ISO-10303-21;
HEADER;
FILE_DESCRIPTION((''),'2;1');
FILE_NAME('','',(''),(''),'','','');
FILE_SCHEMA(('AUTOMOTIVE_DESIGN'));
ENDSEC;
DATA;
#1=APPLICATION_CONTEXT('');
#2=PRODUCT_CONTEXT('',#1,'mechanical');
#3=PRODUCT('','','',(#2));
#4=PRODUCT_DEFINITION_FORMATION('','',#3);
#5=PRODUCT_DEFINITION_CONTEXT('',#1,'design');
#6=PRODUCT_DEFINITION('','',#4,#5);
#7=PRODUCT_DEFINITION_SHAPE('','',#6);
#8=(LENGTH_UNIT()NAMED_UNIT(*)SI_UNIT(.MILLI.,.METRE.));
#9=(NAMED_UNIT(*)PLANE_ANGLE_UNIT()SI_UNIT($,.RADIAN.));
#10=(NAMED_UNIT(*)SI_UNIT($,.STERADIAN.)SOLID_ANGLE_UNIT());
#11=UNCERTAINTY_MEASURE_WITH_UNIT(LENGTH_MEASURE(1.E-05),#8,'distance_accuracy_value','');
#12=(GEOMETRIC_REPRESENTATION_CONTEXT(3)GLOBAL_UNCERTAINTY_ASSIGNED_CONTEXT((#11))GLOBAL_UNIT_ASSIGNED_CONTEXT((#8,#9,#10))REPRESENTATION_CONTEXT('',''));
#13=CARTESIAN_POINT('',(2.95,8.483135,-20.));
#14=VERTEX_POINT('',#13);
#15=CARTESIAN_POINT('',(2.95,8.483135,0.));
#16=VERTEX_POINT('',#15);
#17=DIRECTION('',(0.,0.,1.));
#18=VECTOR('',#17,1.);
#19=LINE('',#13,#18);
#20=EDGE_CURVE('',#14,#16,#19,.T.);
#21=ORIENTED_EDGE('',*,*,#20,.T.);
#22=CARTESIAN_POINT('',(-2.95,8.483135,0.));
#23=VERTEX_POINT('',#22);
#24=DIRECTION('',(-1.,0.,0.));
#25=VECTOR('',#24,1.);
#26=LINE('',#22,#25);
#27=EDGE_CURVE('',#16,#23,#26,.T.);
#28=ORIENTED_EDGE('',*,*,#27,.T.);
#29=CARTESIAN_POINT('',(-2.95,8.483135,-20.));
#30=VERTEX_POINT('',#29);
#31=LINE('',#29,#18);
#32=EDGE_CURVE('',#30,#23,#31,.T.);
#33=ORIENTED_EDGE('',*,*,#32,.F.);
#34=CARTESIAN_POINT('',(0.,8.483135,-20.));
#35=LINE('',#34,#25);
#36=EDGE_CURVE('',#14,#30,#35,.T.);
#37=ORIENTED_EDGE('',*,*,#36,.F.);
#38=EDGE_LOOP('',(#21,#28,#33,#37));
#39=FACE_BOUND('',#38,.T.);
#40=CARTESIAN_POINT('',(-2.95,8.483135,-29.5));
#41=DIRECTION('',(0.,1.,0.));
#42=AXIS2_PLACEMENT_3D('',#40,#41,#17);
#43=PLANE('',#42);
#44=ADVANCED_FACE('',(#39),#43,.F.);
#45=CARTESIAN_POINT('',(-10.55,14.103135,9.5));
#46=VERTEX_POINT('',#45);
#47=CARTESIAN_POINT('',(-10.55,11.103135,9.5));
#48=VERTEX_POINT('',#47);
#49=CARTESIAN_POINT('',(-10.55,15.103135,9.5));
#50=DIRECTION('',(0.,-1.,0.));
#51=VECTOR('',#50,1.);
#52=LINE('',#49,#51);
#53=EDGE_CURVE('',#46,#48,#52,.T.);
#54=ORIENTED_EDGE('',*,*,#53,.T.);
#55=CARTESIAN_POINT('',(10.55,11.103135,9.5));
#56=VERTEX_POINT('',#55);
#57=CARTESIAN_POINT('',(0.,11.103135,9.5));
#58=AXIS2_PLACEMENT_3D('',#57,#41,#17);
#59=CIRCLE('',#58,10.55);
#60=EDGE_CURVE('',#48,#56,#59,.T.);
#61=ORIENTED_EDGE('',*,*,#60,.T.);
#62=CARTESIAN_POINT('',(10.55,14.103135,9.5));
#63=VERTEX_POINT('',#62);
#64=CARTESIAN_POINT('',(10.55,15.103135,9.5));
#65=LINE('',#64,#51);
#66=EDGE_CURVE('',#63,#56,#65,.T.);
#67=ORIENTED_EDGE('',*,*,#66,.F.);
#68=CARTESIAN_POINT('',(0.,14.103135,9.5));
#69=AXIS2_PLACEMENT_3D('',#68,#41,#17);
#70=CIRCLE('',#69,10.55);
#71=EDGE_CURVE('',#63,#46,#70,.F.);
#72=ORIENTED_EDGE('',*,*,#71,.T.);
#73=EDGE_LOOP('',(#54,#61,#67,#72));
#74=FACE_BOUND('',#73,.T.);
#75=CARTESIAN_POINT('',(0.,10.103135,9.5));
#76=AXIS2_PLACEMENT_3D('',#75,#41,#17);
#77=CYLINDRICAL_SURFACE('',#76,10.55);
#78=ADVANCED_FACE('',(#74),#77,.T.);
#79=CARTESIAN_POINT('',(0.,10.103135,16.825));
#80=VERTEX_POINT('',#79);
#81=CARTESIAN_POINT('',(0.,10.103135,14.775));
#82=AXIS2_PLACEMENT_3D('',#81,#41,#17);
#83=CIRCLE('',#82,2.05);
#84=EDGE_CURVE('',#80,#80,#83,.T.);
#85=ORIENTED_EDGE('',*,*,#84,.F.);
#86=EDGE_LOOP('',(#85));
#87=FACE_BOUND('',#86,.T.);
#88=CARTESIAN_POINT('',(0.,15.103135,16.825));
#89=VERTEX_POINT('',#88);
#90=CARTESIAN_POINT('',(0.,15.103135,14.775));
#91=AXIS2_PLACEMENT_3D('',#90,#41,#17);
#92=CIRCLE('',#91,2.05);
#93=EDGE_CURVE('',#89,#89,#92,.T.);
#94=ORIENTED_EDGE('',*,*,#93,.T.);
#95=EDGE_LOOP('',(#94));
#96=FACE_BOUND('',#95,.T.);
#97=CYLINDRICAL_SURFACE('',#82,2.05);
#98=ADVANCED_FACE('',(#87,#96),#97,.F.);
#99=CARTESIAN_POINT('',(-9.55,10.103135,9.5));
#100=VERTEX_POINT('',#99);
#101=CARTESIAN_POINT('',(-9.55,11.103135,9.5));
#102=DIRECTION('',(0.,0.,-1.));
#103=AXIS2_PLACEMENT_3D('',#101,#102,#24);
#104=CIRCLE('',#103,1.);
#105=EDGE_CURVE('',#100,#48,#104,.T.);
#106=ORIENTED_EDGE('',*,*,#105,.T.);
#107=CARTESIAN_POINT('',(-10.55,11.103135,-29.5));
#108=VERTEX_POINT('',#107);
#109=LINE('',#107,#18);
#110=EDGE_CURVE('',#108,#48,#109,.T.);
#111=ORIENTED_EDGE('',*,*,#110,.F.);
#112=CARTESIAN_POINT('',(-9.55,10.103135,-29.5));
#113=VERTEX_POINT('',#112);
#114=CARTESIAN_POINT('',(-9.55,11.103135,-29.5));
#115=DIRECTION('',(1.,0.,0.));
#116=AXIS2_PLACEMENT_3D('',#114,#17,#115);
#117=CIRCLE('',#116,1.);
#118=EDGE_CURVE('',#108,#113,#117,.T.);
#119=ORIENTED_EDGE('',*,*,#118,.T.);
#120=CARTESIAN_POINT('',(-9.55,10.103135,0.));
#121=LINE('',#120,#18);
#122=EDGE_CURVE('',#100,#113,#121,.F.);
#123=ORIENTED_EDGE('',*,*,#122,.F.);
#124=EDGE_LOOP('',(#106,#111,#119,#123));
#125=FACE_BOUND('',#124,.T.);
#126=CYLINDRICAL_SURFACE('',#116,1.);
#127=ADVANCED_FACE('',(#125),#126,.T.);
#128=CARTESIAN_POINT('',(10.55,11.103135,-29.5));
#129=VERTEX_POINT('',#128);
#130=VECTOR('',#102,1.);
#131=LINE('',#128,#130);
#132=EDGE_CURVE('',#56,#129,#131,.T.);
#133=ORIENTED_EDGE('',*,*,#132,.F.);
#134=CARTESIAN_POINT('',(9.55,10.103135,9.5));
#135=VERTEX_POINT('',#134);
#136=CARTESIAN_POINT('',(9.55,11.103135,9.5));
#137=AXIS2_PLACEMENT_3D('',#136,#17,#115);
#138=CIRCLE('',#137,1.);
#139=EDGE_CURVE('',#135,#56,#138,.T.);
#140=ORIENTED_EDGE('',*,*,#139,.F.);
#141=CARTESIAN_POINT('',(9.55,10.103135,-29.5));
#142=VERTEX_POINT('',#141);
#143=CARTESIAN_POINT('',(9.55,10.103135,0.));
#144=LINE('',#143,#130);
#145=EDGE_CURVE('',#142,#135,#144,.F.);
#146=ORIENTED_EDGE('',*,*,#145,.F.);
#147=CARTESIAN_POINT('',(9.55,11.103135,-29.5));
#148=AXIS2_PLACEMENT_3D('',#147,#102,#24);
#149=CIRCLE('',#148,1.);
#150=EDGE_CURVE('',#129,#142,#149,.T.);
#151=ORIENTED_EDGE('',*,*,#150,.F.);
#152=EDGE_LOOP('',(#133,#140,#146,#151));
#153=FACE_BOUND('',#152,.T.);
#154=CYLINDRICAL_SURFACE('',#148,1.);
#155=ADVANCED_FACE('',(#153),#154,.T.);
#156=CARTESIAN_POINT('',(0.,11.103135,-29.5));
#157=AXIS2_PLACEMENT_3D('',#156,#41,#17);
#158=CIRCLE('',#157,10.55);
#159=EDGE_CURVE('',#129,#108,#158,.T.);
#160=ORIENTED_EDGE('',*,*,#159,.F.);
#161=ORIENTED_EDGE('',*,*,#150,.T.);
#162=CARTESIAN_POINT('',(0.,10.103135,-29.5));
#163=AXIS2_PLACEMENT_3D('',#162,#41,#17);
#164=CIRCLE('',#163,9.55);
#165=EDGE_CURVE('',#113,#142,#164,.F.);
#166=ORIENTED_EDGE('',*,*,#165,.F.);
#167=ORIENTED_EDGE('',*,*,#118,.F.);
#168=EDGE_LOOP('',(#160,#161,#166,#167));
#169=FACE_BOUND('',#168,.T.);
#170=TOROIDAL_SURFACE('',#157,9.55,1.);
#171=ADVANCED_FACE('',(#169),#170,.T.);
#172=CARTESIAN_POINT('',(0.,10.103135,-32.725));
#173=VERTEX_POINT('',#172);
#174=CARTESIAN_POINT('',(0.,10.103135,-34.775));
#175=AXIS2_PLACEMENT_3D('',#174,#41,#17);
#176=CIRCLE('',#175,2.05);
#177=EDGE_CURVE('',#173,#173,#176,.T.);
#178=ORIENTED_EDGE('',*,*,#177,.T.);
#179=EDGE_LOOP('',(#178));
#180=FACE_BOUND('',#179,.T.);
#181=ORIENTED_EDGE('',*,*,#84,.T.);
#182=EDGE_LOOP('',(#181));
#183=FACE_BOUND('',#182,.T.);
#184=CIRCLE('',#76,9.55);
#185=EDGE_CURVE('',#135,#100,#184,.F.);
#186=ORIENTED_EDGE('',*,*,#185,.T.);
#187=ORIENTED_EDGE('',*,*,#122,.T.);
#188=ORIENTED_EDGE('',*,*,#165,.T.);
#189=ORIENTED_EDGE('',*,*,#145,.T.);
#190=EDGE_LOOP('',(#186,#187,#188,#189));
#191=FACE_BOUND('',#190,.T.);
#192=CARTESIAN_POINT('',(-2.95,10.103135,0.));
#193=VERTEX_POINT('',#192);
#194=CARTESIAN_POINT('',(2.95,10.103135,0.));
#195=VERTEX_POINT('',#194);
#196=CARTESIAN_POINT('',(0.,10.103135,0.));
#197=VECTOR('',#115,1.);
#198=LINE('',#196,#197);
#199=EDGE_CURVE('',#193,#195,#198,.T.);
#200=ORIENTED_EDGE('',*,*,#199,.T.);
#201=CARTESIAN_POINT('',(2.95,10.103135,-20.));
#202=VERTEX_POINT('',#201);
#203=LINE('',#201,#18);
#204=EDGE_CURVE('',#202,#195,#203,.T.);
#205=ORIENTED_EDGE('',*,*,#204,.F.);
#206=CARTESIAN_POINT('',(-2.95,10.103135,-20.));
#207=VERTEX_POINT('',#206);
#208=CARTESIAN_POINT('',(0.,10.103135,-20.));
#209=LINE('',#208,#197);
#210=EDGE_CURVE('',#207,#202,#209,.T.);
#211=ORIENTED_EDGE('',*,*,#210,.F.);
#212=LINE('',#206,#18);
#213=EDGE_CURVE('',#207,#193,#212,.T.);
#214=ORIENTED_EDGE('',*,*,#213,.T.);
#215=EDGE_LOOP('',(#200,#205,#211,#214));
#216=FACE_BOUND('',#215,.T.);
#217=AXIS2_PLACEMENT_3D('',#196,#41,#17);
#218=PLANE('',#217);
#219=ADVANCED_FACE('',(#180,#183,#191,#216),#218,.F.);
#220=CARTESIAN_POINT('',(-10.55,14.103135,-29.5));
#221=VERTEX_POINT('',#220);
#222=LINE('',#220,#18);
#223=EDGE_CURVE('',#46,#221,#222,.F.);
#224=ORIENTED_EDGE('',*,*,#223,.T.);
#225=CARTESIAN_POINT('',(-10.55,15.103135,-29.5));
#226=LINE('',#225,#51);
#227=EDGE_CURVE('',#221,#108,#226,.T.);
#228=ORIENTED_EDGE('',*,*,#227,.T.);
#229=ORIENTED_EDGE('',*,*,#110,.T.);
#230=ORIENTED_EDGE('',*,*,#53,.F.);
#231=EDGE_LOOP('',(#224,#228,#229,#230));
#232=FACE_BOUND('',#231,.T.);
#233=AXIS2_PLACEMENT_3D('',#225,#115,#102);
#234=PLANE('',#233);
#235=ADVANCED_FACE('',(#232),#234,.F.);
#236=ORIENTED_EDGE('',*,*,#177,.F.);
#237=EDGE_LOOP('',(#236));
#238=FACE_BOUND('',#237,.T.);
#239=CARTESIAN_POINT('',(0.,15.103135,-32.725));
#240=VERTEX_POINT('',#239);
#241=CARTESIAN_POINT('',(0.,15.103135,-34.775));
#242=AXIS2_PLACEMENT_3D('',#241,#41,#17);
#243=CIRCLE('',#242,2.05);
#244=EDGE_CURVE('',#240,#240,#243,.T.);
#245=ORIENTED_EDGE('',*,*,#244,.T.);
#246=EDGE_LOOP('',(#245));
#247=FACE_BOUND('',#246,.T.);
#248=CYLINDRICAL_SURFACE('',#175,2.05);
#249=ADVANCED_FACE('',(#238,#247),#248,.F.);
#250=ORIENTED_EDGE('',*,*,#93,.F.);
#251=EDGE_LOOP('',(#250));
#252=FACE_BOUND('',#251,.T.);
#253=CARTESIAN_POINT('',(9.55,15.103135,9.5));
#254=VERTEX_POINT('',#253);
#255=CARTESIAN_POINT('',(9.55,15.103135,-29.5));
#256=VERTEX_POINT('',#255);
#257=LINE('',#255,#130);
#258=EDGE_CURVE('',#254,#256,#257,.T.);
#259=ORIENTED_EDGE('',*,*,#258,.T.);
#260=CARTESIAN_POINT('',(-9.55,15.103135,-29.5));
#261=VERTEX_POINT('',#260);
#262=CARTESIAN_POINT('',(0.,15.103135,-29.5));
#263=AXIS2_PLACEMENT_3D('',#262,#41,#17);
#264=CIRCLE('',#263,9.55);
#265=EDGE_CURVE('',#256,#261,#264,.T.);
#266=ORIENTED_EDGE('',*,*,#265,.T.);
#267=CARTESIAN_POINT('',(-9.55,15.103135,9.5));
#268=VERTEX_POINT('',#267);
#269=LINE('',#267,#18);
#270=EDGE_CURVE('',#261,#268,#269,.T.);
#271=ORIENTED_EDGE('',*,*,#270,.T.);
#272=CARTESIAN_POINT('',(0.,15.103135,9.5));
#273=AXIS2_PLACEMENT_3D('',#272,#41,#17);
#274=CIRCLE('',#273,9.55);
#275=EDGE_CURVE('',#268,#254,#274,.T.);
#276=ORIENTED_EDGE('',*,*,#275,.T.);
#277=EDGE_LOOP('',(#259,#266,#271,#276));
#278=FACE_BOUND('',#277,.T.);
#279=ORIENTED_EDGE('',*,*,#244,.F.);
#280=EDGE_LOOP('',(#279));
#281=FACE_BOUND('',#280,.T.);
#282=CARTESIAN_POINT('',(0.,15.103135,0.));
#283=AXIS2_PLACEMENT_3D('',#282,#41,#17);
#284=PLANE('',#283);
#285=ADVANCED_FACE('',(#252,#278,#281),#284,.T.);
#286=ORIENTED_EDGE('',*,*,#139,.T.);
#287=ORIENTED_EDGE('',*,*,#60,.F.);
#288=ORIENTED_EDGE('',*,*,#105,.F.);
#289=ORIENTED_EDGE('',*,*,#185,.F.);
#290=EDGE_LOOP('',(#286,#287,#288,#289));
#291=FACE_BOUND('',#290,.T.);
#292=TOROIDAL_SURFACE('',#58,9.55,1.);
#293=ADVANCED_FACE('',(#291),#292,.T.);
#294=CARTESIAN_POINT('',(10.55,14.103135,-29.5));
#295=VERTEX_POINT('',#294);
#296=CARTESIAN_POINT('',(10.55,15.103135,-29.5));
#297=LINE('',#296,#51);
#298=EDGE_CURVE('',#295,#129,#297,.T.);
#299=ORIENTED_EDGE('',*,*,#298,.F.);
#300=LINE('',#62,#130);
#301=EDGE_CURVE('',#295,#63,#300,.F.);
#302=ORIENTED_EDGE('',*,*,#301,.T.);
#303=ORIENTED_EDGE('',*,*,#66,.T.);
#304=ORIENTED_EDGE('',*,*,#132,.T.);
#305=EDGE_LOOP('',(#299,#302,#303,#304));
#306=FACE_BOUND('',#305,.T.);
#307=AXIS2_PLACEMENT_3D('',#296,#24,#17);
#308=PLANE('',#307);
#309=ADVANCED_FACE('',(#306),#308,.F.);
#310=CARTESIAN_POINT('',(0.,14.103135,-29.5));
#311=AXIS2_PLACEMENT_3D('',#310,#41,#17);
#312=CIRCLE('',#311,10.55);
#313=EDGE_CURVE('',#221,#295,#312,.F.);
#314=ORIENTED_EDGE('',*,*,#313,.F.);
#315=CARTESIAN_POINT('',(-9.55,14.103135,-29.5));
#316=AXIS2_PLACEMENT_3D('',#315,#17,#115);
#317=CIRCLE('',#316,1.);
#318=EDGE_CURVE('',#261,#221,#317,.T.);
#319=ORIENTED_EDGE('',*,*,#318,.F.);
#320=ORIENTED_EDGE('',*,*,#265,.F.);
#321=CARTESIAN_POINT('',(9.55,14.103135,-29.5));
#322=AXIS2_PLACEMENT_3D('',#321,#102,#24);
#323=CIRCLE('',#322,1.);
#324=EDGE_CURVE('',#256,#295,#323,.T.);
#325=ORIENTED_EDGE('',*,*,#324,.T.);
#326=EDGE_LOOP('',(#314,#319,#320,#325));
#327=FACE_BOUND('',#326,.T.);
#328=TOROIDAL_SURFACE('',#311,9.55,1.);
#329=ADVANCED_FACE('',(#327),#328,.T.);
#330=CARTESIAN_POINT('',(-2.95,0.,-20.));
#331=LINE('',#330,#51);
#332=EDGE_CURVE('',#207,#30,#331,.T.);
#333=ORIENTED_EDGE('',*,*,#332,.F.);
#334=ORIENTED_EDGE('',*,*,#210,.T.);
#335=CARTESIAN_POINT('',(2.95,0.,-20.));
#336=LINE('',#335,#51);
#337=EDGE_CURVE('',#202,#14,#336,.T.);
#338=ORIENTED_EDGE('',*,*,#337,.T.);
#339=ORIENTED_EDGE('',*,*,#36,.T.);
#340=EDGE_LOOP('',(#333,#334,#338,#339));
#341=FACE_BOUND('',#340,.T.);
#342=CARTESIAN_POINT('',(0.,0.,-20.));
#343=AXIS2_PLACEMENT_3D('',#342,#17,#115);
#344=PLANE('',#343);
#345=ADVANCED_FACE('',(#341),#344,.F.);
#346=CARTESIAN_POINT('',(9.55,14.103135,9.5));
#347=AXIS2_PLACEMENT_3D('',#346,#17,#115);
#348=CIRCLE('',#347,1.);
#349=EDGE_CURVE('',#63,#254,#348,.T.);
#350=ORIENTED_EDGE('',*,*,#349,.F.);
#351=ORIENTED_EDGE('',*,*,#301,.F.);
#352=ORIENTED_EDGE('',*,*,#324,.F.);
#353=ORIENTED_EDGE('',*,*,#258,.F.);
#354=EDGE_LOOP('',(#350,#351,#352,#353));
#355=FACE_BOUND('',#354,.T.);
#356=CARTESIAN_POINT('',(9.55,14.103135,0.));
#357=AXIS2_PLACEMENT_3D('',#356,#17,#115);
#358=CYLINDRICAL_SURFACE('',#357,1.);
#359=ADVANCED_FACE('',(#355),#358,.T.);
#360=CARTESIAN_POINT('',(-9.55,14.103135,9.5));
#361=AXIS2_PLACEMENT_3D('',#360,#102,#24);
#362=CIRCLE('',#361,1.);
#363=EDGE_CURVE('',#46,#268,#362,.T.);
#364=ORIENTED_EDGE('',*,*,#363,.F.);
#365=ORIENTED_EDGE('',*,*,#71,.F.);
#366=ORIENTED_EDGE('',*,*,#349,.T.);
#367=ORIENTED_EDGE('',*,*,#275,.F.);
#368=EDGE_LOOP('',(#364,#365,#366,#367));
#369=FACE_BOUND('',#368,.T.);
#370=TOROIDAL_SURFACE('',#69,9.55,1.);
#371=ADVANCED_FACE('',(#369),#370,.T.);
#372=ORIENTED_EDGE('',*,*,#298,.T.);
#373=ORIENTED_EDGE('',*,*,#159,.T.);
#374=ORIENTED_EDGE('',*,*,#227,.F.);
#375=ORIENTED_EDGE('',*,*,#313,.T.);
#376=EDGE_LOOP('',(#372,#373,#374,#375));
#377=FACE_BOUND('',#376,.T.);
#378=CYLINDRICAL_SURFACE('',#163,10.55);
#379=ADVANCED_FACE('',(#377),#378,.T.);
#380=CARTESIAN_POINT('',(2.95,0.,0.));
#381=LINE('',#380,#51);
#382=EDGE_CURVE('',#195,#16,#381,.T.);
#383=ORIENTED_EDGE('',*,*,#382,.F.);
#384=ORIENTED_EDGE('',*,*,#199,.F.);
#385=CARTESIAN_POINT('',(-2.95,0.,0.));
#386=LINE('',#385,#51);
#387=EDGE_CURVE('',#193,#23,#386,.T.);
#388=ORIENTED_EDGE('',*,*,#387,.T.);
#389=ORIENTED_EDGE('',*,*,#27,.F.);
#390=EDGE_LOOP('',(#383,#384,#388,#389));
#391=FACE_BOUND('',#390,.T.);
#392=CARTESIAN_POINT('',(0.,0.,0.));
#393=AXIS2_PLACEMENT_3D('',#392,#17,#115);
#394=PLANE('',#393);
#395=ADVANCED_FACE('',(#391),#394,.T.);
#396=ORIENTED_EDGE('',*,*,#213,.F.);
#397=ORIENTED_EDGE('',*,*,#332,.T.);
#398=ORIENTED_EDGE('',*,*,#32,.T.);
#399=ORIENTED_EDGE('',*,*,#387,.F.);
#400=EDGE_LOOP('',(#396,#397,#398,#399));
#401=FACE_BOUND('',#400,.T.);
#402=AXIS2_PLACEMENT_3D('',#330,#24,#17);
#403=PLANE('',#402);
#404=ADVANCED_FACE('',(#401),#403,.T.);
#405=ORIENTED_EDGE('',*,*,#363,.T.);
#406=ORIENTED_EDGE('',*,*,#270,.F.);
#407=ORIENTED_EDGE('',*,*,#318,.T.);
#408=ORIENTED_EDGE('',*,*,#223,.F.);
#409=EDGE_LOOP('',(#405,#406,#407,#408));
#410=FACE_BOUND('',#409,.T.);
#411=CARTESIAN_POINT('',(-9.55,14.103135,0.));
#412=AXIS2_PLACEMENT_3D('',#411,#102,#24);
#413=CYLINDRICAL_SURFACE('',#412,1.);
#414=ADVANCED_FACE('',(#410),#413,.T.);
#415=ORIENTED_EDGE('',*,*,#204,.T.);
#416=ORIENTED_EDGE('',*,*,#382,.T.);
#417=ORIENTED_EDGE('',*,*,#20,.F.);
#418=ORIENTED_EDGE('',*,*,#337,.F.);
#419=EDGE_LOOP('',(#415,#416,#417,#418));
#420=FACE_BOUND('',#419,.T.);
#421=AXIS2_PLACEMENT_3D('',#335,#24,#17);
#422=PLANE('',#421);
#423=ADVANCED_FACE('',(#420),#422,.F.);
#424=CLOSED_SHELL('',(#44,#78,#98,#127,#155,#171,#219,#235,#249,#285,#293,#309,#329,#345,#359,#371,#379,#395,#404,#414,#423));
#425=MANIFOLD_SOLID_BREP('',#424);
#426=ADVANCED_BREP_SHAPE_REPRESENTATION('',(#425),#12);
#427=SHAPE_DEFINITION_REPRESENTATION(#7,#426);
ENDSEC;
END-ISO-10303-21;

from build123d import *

# Parameters (mm, degrees)
BOSS_EXTRU_1_DEPTH      = 20
CONG_1_R                = 0.5
CONG_2_R                = 1
BOSS_EXTRU_2_DEPTH      = 5
ENL_V_MAT_EXTRU_1_DEPTH = 35.78012648597392
ESQUISSE6_R             = 2.0500000000000007
ESQUISSE6_R_2           = 2.05
BOSS_EXTRU_3_DEPTH      = 5
CONG_4_R                = 1


with BuildPart() as part:
    # Esquisse1 → Boss.-Extru.1 (new body)
    with BuildSketch(Plane.XY):
        Polygon((-1.176e-14, 10.103135382441117), (-2.578e-14, 4.840000000000001), (3.5, 4.840000000000001), (5.71, 6.983135382441116), (5.71, 8.483135382441116), (2.95, 8.483135382441116), (2.95, 10.103135382441117), align=None)
        Polygon((-3.5, 4.840000000000001), (-2.576e-14, 4.840000000000001), (-1.176e-14, 10.103135382441117), (-2.95, 10.103135382441117), (-2.95, 8.483135382441116), (-5.71, 8.483135382441116), (-5.71, 6.983135382441116), align=None)
    extrude(amount=-BOSS_EXTRU_1_DEPTH)

    # Congé1
    cong_1_edges = [part.edges().sort_by_distance(p)[0] for p in [
        (5.71, 7.733135382441116, 0),
        (4.605, 5.911567691220558, 0),
        (0, 4.840000000000001, 0),
        (-4.605, 5.911567691220558, 0),
        (-5.71, 7.733135382441116, 0),
        (-5.71, 7.733135382441116, -20),
        (-4.605, 5.911567691220558, -20),
        (0, 4.840000000000001, -20),
        (4.605, 5.911567691220558, -20),
        (5.71, 7.733135382441116, -20),
    ]]
    fillet(cong_1_edges, radius=CONG_1_R)

    # Congé2
    # the kernel refuses this fillet: 1 mm, written as the material it takes off along each edge
    with BuildSketch(Plane(origin=(4.71, 7.4063748668930085, -20), x_dir=(1, 0, 0), z_dir=(0, 1, 0))) as cong_2_piece_1:
        with BuildLine():
            CenterArc((0.5, -0.5), 0.5, 0, 90)
            Line((1, -0.5), (1, 0))
            Line((1, 0), (0.5, 0))
        make_face()
    revolve(axis=Axis((4.71, 7.4063748668930085, -20), (0, 0, -1)), revolution_arc=45.87999999999987, mode=Mode.SUBTRACT)
    with BuildSketch(Plane(origin=(-4.710000000000001, 7.40637486689301, -20), x_dir=(-0.6961634275566162, -0.717883334625219, 0), z_dir=(0.717883334625219, -0.6961634275566162, 0))) as cong_2_piece_2:
        with BuildLine():
            CenterArc((0.5, -0.5), 0.5, 0, 90)
            Line((1, -0.5), (1, 0))
            Line((1, 0), (0.5, 0))
        make_face()
    revolve(axis=Axis((-4.710000000000001, 7.40637486689301, -20), (0, 0, -1)), revolution_arc=45.87999999999987, mode=Mode.SUBTRACT)
    with BuildSketch(Plane(origin=(4.71, 7.4063748668930085, 0), x_dir=(0.6961634275566162, -0.717883334625219, 0), z_dir=(-0.717883334625219, -0.6961634275566162, 0))) as cong_2_piece_3:
        with BuildLine():
            CenterArc((0.5, -0.5), 0.5, 0, 90)
            Line((1, -0.5), (1, 0))
            Line((1, 0), (0.5, 0))
        make_face()
    revolve(axis=Axis((4.71, 7.4063748668930085, 0), (0, 0, 1)), revolution_arc=45.87999999999987, mode=Mode.SUBTRACT)
    with BuildSketch(Plane(origin=(-4.710000000000001, 7.40637486689301, 0), x_dir=(-1, 0, 0), z_dir=(0, 1, 0))) as cong_2_piece_4:
        with BuildLine():
            CenterArc((0.5, -0.5), 0.5, 0, 90)
            Line((1, -0.5), (1, 0))
            Line((1, 0), (0.5, 0))
        make_face()
    revolve(axis=Axis((-4.710000000000001, 7.40637486689301, 0), (0, 0, 1)), revolution_arc=45.87999999999987, mode=Mode.SUBTRACT)
    with BuildSketch(Plane(origin=(-5.71, 6.983135382441116, 1.1e-16), x_dir=(0.717883334625219, -0.6961634275566161, 0), z_dir=(0, 0, -1))) as cong_2_piece_5:
        with BuildLine():
            CenterArc((CONG_2_R * 0.423239484452, -CONG_2_R), CONG_2_R, 90.00000000000003, 45.879999999999825)
            Line((-CONG_2_R * 0.294643850173, -CONG_2_R * 0.303836572443), (0, 0))
            Line((0, 0), (CONG_2_R * 0.423239484452, 0))
        make_face()
    extrude(amount=20, mode=Mode.SUBTRACT)
    with BuildSketch(Plane(origin=(5.71, 6.983135382441116, 1.1e-16), x_dir=(-0.7178833346252179, -0.6961634275566172, 0), z_dir=(0, 0, -1))) as cong_2_piece_6:
        with BuildLine():
            CenterArc((CONG_2_R * 0.423239484452, CONG_2_R), CONG_2_R, 224.12000000000015, 45.87999999999994)
            Line((-CONG_2_R * 0.294643850173, CONG_2_R * 0.303836572443), (0, 0))
            Line((0, 0), (CONG_2_R * 0.423239484452, 2e-17))
        make_face()
    extrude(amount=20, mode=Mode.SUBTRACT)

    # Esquisse3 → Boss.-Extru.2 (add)
    with BuildSketch(Plane(origin=(0, 10.103135382441117, 0), x_dir=(1, 0, 0), z_dir=(0, 1, 0))):
        Polygon((-10.550000000000004, 29.5), (10.549999999999994, 29.5), (10.55, -9.500000000000002), (-10.55, -9.500000000000002), align=None)
    extrude(amount=BOSS_EXTRU_2_DEPTH)

    # Esquisse5 → Enlèv. mat.-Extru.1 (cut, through all)
    with BuildSketch(Plane.XY):
        with BuildLine():
            Line((-5.209999999999999, 8.483135382441116), (-5.71, 8.483135382441116))
            Line((-5.71, 8.483135382441116), (-5.71, 7.4063748668930085))
            ThreePointArc((-5.71, 7.4063748668930085), (-5.630913521335368, 7.01660790289825), (-5.406163427556616, 6.68849153226779))
            Line((-5.406163427556616, 6.68849153226779), (-3.5, 4.840000000000001))
            Line((-3.5, 4.840000000000001), (3.5, 4.840000000000001))
            Line((3.5, 4.840000000000001), (5.406163427556617, 6.68849153226779))
            ThreePointArc((5.406163427556617, 6.68849153226779), (5.630913521335369, 7.01660790289825), (5.71, 7.406374866893009))
            Line((5.71, 7.406374866893009), (5.71, 8.483135382441116))
            Line((5.71, 8.483135382441116), (5.209999999999999, 8.483135382441116))
            Line((5.209999999999999, 8.483135382441116), (2.95, 8.483135382441116))
            Line((2.95, 8.483135382441116), (-2.95, 8.483135382441116))
            Line((-2.95, 8.483135382441116), (-5.209999999999999, 8.483135382441116))
        make_face()
    extrude(amount=-ENL_V_MAT_EXTRU_1_DEPTH, mode=Mode.SUBTRACT)

    # Esquisse6 → Boss.-Extru.3 (add)
    # profile 1 of 2: a face of its own
    with BuildSketch(Plane(origin=(0, 15.103135382441117, 0), x_dir=(1, 0, 0), z_dir=(0, 1, 0))):
        with BuildLine():
            ThreePointArc((-10.550000000000004, 29.5), (-4.56e-15, 40.05), (10.549999999999994, 29.5))
            Line((10.549999999999994, 29.5), (-10.550000000000004, 29.5))
        make_face()
        with Locations(Location((-5.53e-15, 34.775, 0), (0, 0, 270))):
            Circle(ESQUISSE6_R, mode=Mode.SUBTRACT)
    # profile 2 of 2: a face of its own
    with BuildSketch(Plane(origin=(0, 15.103135382441117, 0), x_dir=(1, 0, 0), z_dir=(0, 1, 0))):
        with BuildLine():
            ThreePointArc((-10.55, -9.500000000000002), (-1.94e-15, -20.050000000000004), (10.55, -9.500000000000002))
            Line((10.55, -9.500000000000002), (-10.55, -9.500000000000002))
        make_face()
        with Locations(Location((-9.7e-16, -14.775000000000002, 0), (0, 0, 270))):
            Circle(ESQUISSE6_R_2, mode=Mode.SUBTRACT)
    extrude(amount=-BOSS_EXTRU_3_DEPTH)

    # Congé4
    cong_4_edges = [part.edges().sort_by_distance(p)[0] for p in [
        (10.549999999999997, 10.103135382441117, -10),
        (-10.550000000000002, 10.103135382441117, -9.999999999999998),
        (10.549999999999997, 15.103135382441117, -10),
        (-10.550000000000002, 15.103135382441117, -9.999999999999998),
        (-8.32e-15, 15.103135382441117, -40.05),
        (-8.32e-15, 10.103135382441117, -40.05),
        (3.15e-15, 10.103135382441117, 20.050000000000004),
        (3.15e-15, 15.103135382441117, 20.050000000000004),
    ]]
    fillet(cong_4_edges, radius=CONG_4_R)


solid = part.part
